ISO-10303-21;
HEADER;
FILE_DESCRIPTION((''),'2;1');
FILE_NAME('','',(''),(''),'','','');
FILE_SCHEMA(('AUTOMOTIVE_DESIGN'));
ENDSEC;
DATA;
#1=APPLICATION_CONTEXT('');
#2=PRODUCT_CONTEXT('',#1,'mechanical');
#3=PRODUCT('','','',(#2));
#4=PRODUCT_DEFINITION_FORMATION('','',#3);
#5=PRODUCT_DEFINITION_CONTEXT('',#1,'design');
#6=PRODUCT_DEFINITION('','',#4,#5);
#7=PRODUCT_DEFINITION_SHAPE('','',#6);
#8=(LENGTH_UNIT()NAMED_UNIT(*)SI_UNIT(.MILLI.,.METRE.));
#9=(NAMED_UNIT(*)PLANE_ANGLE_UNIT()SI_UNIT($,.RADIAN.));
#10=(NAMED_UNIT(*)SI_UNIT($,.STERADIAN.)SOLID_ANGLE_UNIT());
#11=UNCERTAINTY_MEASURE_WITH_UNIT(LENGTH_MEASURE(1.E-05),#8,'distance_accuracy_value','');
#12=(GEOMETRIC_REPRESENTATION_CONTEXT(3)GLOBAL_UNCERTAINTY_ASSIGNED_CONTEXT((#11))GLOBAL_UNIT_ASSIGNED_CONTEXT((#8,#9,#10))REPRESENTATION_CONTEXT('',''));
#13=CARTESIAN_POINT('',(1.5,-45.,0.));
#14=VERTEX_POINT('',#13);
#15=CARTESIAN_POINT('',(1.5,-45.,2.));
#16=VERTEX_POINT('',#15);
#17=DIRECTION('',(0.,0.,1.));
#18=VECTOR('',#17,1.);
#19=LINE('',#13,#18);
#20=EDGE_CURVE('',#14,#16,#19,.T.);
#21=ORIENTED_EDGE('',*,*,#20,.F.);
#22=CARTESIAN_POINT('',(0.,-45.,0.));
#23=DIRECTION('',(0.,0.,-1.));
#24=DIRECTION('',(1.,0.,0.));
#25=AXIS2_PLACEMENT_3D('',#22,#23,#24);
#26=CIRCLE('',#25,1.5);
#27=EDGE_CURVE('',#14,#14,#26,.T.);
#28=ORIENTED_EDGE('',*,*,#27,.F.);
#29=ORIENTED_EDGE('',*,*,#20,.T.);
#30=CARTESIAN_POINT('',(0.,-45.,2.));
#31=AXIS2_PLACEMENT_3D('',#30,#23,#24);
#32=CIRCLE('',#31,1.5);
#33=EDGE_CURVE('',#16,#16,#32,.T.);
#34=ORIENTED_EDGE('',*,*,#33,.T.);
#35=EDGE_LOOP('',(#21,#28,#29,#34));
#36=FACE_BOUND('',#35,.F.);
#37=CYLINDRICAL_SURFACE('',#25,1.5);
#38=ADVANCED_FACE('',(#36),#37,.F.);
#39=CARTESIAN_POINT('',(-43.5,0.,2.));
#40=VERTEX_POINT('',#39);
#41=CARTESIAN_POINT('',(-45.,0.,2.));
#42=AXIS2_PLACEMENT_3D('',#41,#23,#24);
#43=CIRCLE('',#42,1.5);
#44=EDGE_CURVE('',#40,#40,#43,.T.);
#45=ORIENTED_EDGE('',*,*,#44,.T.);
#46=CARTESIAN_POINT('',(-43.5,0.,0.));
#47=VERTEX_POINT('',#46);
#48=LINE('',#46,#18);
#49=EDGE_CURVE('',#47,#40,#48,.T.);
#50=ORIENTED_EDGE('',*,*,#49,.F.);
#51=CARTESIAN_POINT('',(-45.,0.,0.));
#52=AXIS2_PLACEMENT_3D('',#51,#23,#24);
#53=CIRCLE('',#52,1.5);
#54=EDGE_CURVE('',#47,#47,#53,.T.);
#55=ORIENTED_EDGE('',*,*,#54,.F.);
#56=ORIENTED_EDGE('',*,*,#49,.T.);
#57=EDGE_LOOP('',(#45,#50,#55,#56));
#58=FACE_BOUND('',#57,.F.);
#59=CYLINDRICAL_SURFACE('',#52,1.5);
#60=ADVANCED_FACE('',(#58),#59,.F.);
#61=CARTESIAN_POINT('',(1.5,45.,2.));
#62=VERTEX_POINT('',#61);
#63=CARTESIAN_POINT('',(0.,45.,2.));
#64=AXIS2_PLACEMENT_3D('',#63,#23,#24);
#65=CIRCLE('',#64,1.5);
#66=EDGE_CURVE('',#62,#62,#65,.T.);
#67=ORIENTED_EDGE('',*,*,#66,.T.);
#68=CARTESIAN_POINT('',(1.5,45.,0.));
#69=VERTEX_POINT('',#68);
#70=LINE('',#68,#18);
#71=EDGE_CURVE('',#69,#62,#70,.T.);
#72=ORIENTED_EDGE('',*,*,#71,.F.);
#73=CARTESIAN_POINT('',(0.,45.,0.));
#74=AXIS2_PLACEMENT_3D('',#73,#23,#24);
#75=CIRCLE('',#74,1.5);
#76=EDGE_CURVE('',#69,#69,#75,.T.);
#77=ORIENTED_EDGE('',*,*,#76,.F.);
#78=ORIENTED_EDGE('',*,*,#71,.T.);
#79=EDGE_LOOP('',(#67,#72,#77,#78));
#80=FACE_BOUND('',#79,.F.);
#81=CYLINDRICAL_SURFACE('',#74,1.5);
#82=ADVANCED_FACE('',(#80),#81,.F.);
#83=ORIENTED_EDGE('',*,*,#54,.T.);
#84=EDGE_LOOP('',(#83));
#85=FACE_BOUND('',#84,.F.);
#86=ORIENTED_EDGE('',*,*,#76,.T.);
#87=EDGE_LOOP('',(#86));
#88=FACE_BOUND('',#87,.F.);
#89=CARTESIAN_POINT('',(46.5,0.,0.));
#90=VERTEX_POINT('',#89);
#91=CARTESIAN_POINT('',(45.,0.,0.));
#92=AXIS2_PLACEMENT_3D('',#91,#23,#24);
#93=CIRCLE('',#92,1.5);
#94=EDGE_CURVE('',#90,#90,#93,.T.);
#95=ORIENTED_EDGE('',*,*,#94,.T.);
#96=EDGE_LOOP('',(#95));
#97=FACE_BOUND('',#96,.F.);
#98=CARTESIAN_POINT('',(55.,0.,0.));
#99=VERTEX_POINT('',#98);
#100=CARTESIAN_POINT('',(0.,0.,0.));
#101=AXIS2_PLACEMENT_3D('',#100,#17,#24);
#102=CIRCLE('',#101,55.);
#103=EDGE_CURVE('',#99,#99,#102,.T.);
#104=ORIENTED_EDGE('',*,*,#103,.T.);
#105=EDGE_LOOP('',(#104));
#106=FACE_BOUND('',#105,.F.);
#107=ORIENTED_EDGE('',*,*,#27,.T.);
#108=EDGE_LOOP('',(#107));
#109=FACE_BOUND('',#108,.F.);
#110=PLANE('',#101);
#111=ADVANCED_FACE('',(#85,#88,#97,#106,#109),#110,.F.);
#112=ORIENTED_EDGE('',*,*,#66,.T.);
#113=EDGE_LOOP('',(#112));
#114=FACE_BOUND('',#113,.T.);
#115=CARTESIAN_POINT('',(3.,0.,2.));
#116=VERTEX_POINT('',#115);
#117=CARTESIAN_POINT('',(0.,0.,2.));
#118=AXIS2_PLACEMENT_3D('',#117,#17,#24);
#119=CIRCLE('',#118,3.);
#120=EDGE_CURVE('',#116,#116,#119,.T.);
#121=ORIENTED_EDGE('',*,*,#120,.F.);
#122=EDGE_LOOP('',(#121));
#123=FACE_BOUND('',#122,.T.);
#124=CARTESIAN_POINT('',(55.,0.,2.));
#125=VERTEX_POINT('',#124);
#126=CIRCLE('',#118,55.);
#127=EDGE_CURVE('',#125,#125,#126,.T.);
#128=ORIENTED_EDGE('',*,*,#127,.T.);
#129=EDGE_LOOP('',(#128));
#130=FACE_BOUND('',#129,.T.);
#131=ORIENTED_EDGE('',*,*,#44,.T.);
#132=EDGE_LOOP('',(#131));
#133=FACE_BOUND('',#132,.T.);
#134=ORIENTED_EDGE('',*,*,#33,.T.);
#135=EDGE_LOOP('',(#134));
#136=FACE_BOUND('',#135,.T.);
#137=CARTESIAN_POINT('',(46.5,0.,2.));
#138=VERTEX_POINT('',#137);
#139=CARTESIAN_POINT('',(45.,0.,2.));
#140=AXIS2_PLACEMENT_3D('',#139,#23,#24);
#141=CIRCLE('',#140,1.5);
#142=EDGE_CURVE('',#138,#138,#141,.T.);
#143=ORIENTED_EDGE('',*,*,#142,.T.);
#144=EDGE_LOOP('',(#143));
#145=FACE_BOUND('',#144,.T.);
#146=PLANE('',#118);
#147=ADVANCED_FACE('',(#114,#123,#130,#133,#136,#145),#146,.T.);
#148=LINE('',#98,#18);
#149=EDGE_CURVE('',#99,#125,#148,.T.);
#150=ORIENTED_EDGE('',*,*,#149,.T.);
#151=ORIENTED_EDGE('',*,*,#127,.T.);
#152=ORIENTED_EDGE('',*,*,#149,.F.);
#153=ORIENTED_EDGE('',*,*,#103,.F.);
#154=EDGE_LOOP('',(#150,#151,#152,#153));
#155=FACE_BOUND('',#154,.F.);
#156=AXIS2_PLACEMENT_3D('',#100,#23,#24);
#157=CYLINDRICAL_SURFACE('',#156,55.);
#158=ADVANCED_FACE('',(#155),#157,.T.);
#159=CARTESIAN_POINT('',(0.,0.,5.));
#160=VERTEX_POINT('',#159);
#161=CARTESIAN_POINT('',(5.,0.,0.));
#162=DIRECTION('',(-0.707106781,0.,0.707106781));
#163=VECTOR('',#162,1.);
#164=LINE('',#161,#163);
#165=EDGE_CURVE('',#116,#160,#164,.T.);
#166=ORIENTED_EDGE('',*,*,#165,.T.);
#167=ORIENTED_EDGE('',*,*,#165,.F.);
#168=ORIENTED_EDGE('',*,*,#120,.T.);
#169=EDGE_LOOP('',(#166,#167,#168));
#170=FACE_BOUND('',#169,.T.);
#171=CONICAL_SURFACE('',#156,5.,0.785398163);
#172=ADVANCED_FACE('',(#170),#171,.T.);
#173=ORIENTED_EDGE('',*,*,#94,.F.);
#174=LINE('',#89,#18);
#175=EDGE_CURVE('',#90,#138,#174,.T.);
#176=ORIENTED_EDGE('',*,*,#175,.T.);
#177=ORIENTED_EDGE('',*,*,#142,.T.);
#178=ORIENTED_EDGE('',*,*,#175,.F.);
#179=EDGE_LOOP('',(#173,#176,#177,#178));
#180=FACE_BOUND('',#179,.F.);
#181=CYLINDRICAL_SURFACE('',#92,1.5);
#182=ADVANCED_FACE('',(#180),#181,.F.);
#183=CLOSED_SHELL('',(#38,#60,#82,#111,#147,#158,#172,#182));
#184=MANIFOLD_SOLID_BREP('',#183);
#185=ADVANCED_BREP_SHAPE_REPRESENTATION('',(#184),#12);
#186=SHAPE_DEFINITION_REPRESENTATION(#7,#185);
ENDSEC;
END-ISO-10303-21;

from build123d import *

# Parameters (mm, degrees)
F0_R     = 55
F1_DEPTH = 2
F2_R     = 1.5
F3_DEPTH = 25
F4_R     = 5
F5_DEPTH = 3


# Not quite as in the source:
# - a fillet or chamfer that OpenCascade refuses, or shapes differently, is made with other operations: its cross-section is extruded or revolved along the edge and cut away or added


with BuildPart() as f1:
    # F0 (on Top) → F1 (new body)
    with BuildSketch(Plane.XY):
        Circle(F0_R)
    extrude(amount=F1_DEPTH)

    # F2 (on face) → F3 (cut)
    with BuildSketch(Plane(origin=(0, 0, 0), x_dir=(1, 0, 0), z_dir=(0, 0, -1))):
        with Locations((-45, 0)):
            Circle(F2_R)
        with Locations((0, 45)):
            Circle(F2_R)
        with Locations((45, 0)):
            Circle(F2_R)
        with Locations((0, -45)):
            Circle(F2_R)
    extrude(amount=-F3_DEPTH, mode=Mode.SUBTRACT)

    # F4 (on face) → F5 (join)
    with BuildSketch(Plane.XY.offset(2)):
        Circle(F4_R)
    extrude(amount=F5_DEPTH)

    # F6: chamfer of 5 on 1 edges, made by hand


with BuildPart() as f6_tool2:
    # F6_s3 → F6_t4 (revolve)
    with BuildSketch(Plane.XZ):
        Polygon((5, 0), (0, 5), (5, 5), align=None)
    revolve(axis=Axis((0, 0, 5), (0, 0, 1)))

    split(bisect_by=Plane.XY.offset(2), keep=Keep.TOP)


with BuildPart() as f1_1:
    add(f1.part)

    # F6_t1: cut F6_tool2
    add(f6_tool2.part, mode=Mode.SUBTRACT)


solid = f1_1.part
